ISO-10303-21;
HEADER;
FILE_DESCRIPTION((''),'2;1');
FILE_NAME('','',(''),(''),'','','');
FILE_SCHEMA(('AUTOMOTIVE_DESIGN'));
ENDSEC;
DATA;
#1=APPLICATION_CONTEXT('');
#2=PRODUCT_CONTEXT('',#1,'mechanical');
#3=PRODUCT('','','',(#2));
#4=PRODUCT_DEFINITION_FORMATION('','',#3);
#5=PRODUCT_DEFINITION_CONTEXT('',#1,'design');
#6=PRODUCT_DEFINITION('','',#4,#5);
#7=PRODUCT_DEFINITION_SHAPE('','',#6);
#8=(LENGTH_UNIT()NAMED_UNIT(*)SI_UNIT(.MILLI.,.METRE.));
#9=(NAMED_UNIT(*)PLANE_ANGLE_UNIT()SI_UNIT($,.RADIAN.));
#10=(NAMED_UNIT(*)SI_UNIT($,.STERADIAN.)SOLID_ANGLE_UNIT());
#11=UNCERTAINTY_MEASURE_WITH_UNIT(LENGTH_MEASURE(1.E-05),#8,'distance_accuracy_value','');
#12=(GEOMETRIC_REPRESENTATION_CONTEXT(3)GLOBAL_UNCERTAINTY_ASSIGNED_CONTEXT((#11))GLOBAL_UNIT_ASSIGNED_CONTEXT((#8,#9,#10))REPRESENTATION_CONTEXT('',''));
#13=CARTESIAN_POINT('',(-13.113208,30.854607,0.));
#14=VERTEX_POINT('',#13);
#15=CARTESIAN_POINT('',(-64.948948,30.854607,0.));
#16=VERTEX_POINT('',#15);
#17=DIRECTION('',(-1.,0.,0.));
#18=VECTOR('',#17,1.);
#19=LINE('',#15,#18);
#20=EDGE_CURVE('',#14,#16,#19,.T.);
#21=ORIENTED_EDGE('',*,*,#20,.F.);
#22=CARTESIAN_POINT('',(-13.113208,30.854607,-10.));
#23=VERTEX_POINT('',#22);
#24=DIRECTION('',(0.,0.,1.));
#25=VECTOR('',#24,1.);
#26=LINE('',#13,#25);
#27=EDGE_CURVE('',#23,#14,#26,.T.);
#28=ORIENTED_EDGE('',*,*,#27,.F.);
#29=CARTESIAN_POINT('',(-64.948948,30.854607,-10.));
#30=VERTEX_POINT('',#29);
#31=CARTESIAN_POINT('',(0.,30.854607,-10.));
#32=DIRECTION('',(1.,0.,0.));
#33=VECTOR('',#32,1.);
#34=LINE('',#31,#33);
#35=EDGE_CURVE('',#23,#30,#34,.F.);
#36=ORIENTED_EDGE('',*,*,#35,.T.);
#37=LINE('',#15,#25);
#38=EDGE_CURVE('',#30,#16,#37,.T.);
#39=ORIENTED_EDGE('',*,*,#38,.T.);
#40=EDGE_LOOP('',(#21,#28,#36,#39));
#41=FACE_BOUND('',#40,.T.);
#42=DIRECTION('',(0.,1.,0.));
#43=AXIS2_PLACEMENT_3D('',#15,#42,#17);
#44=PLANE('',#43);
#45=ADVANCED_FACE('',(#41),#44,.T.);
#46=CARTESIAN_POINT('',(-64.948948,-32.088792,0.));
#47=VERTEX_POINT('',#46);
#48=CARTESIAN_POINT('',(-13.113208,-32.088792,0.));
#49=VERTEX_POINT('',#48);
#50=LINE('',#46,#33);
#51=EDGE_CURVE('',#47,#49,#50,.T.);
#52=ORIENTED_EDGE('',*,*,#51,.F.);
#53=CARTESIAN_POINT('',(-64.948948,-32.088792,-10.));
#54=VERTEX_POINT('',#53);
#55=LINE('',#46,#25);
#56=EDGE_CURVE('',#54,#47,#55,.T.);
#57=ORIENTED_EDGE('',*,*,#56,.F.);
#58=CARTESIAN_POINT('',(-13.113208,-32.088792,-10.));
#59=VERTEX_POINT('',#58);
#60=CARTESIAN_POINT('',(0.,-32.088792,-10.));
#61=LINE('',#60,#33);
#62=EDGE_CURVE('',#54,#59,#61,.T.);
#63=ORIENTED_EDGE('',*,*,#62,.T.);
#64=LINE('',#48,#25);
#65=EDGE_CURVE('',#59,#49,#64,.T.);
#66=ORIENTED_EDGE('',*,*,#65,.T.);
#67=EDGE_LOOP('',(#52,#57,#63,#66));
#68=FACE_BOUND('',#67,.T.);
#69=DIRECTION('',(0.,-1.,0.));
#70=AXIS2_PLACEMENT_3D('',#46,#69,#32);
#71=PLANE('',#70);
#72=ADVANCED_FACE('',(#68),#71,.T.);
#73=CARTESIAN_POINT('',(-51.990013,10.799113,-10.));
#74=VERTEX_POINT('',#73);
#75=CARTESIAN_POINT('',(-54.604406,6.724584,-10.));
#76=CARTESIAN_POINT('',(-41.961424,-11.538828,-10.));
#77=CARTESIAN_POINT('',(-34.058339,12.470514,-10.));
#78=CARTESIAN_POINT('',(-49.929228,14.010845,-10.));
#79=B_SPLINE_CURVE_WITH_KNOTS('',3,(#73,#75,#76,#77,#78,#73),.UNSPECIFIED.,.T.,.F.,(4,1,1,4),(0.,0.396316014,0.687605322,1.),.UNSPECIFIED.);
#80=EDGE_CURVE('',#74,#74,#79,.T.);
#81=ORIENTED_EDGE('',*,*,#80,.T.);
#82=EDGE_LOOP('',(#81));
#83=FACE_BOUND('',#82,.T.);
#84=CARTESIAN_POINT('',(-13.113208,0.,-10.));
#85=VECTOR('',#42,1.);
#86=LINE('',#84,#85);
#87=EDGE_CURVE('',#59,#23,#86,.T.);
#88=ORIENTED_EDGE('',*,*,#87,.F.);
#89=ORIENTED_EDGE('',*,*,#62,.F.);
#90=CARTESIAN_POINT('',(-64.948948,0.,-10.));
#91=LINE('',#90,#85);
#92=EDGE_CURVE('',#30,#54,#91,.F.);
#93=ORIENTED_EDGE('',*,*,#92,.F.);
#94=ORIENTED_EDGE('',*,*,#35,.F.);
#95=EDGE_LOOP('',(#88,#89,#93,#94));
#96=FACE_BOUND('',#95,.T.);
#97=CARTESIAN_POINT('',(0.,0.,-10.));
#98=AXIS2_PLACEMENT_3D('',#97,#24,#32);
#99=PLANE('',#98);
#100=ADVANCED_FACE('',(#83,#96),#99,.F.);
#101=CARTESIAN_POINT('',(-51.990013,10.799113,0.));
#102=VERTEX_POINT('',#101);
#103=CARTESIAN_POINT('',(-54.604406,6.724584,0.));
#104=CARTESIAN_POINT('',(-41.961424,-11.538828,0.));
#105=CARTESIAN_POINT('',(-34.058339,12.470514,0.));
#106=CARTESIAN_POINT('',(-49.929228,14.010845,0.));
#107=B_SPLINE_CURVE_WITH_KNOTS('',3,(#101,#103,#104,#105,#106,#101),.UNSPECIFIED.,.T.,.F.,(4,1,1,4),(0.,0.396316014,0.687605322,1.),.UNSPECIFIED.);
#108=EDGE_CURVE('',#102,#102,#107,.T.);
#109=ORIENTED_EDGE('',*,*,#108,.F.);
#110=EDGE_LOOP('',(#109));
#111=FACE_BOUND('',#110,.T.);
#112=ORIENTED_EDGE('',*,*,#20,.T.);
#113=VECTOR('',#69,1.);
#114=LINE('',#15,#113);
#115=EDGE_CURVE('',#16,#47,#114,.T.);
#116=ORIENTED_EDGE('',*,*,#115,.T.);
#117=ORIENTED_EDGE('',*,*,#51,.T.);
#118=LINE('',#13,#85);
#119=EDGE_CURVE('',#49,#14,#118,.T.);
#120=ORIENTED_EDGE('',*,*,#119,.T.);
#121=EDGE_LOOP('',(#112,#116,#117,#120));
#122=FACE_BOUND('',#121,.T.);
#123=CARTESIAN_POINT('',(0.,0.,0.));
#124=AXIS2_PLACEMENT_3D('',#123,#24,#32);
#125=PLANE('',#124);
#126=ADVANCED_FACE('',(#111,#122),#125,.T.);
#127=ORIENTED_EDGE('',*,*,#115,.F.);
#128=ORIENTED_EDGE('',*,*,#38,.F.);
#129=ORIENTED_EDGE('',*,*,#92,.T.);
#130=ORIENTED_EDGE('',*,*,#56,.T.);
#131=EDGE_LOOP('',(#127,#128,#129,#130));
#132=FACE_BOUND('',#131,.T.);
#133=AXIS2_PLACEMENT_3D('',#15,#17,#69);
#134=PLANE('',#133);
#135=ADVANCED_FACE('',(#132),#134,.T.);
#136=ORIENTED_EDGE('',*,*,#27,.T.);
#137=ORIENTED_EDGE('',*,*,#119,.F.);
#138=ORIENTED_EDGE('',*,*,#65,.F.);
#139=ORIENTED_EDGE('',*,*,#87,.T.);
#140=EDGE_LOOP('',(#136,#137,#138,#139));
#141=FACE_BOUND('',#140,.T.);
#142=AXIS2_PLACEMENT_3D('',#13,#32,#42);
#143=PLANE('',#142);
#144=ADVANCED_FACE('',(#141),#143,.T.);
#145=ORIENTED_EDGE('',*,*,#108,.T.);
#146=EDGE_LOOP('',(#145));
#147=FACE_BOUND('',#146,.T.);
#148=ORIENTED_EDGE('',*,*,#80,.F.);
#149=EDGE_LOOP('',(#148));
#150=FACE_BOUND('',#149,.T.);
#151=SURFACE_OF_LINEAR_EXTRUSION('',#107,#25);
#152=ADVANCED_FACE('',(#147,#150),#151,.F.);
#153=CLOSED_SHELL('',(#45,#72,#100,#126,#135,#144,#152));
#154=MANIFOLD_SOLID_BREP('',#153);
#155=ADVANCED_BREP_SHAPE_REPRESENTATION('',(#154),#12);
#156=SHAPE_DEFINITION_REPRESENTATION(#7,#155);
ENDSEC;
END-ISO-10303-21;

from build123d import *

# Parameters (mm, degrees)
THICKEN_START       = -10
THICKEN_1_OUTLINE_W = 51.835740335
THICKEN_1_OUTLINE_H = 62.943398979
THICKEN_1_DEPTH     = 10


# Read off the part's stored shape, not the designer's step: Придать толщину1
with BuildPart() as part:
    # Придать толщину1 outline → Придать толщину1 (new body)
    with BuildSketch(Plane.XY.offset(THICKEN_START)):
        with Locations((-39.031078289, -0.617092147)):
            Rectangle(THICKEN_1_OUTLINE_W, THICKEN_1_OUTLINE_H)
        with BuildLine():
            add(Edge.make_bspline(
                [(-51.990013372, 10.79911257), (-54.604406091, 6.724584095), (-41.961423525, -11.538827577), (-34.058339356, 12.470514149), (-49.929227681, 14.010845038), (-51.990013372, 10.79911257)],
                knots=[0, 0, 0, 0, 0.396316014, 0.687605322, 1, 1, 1, 1], degree=3))
        make_face(mode=Mode.SUBTRACT)
    extrude(amount=THICKEN_1_DEPTH)


solid = part.part
